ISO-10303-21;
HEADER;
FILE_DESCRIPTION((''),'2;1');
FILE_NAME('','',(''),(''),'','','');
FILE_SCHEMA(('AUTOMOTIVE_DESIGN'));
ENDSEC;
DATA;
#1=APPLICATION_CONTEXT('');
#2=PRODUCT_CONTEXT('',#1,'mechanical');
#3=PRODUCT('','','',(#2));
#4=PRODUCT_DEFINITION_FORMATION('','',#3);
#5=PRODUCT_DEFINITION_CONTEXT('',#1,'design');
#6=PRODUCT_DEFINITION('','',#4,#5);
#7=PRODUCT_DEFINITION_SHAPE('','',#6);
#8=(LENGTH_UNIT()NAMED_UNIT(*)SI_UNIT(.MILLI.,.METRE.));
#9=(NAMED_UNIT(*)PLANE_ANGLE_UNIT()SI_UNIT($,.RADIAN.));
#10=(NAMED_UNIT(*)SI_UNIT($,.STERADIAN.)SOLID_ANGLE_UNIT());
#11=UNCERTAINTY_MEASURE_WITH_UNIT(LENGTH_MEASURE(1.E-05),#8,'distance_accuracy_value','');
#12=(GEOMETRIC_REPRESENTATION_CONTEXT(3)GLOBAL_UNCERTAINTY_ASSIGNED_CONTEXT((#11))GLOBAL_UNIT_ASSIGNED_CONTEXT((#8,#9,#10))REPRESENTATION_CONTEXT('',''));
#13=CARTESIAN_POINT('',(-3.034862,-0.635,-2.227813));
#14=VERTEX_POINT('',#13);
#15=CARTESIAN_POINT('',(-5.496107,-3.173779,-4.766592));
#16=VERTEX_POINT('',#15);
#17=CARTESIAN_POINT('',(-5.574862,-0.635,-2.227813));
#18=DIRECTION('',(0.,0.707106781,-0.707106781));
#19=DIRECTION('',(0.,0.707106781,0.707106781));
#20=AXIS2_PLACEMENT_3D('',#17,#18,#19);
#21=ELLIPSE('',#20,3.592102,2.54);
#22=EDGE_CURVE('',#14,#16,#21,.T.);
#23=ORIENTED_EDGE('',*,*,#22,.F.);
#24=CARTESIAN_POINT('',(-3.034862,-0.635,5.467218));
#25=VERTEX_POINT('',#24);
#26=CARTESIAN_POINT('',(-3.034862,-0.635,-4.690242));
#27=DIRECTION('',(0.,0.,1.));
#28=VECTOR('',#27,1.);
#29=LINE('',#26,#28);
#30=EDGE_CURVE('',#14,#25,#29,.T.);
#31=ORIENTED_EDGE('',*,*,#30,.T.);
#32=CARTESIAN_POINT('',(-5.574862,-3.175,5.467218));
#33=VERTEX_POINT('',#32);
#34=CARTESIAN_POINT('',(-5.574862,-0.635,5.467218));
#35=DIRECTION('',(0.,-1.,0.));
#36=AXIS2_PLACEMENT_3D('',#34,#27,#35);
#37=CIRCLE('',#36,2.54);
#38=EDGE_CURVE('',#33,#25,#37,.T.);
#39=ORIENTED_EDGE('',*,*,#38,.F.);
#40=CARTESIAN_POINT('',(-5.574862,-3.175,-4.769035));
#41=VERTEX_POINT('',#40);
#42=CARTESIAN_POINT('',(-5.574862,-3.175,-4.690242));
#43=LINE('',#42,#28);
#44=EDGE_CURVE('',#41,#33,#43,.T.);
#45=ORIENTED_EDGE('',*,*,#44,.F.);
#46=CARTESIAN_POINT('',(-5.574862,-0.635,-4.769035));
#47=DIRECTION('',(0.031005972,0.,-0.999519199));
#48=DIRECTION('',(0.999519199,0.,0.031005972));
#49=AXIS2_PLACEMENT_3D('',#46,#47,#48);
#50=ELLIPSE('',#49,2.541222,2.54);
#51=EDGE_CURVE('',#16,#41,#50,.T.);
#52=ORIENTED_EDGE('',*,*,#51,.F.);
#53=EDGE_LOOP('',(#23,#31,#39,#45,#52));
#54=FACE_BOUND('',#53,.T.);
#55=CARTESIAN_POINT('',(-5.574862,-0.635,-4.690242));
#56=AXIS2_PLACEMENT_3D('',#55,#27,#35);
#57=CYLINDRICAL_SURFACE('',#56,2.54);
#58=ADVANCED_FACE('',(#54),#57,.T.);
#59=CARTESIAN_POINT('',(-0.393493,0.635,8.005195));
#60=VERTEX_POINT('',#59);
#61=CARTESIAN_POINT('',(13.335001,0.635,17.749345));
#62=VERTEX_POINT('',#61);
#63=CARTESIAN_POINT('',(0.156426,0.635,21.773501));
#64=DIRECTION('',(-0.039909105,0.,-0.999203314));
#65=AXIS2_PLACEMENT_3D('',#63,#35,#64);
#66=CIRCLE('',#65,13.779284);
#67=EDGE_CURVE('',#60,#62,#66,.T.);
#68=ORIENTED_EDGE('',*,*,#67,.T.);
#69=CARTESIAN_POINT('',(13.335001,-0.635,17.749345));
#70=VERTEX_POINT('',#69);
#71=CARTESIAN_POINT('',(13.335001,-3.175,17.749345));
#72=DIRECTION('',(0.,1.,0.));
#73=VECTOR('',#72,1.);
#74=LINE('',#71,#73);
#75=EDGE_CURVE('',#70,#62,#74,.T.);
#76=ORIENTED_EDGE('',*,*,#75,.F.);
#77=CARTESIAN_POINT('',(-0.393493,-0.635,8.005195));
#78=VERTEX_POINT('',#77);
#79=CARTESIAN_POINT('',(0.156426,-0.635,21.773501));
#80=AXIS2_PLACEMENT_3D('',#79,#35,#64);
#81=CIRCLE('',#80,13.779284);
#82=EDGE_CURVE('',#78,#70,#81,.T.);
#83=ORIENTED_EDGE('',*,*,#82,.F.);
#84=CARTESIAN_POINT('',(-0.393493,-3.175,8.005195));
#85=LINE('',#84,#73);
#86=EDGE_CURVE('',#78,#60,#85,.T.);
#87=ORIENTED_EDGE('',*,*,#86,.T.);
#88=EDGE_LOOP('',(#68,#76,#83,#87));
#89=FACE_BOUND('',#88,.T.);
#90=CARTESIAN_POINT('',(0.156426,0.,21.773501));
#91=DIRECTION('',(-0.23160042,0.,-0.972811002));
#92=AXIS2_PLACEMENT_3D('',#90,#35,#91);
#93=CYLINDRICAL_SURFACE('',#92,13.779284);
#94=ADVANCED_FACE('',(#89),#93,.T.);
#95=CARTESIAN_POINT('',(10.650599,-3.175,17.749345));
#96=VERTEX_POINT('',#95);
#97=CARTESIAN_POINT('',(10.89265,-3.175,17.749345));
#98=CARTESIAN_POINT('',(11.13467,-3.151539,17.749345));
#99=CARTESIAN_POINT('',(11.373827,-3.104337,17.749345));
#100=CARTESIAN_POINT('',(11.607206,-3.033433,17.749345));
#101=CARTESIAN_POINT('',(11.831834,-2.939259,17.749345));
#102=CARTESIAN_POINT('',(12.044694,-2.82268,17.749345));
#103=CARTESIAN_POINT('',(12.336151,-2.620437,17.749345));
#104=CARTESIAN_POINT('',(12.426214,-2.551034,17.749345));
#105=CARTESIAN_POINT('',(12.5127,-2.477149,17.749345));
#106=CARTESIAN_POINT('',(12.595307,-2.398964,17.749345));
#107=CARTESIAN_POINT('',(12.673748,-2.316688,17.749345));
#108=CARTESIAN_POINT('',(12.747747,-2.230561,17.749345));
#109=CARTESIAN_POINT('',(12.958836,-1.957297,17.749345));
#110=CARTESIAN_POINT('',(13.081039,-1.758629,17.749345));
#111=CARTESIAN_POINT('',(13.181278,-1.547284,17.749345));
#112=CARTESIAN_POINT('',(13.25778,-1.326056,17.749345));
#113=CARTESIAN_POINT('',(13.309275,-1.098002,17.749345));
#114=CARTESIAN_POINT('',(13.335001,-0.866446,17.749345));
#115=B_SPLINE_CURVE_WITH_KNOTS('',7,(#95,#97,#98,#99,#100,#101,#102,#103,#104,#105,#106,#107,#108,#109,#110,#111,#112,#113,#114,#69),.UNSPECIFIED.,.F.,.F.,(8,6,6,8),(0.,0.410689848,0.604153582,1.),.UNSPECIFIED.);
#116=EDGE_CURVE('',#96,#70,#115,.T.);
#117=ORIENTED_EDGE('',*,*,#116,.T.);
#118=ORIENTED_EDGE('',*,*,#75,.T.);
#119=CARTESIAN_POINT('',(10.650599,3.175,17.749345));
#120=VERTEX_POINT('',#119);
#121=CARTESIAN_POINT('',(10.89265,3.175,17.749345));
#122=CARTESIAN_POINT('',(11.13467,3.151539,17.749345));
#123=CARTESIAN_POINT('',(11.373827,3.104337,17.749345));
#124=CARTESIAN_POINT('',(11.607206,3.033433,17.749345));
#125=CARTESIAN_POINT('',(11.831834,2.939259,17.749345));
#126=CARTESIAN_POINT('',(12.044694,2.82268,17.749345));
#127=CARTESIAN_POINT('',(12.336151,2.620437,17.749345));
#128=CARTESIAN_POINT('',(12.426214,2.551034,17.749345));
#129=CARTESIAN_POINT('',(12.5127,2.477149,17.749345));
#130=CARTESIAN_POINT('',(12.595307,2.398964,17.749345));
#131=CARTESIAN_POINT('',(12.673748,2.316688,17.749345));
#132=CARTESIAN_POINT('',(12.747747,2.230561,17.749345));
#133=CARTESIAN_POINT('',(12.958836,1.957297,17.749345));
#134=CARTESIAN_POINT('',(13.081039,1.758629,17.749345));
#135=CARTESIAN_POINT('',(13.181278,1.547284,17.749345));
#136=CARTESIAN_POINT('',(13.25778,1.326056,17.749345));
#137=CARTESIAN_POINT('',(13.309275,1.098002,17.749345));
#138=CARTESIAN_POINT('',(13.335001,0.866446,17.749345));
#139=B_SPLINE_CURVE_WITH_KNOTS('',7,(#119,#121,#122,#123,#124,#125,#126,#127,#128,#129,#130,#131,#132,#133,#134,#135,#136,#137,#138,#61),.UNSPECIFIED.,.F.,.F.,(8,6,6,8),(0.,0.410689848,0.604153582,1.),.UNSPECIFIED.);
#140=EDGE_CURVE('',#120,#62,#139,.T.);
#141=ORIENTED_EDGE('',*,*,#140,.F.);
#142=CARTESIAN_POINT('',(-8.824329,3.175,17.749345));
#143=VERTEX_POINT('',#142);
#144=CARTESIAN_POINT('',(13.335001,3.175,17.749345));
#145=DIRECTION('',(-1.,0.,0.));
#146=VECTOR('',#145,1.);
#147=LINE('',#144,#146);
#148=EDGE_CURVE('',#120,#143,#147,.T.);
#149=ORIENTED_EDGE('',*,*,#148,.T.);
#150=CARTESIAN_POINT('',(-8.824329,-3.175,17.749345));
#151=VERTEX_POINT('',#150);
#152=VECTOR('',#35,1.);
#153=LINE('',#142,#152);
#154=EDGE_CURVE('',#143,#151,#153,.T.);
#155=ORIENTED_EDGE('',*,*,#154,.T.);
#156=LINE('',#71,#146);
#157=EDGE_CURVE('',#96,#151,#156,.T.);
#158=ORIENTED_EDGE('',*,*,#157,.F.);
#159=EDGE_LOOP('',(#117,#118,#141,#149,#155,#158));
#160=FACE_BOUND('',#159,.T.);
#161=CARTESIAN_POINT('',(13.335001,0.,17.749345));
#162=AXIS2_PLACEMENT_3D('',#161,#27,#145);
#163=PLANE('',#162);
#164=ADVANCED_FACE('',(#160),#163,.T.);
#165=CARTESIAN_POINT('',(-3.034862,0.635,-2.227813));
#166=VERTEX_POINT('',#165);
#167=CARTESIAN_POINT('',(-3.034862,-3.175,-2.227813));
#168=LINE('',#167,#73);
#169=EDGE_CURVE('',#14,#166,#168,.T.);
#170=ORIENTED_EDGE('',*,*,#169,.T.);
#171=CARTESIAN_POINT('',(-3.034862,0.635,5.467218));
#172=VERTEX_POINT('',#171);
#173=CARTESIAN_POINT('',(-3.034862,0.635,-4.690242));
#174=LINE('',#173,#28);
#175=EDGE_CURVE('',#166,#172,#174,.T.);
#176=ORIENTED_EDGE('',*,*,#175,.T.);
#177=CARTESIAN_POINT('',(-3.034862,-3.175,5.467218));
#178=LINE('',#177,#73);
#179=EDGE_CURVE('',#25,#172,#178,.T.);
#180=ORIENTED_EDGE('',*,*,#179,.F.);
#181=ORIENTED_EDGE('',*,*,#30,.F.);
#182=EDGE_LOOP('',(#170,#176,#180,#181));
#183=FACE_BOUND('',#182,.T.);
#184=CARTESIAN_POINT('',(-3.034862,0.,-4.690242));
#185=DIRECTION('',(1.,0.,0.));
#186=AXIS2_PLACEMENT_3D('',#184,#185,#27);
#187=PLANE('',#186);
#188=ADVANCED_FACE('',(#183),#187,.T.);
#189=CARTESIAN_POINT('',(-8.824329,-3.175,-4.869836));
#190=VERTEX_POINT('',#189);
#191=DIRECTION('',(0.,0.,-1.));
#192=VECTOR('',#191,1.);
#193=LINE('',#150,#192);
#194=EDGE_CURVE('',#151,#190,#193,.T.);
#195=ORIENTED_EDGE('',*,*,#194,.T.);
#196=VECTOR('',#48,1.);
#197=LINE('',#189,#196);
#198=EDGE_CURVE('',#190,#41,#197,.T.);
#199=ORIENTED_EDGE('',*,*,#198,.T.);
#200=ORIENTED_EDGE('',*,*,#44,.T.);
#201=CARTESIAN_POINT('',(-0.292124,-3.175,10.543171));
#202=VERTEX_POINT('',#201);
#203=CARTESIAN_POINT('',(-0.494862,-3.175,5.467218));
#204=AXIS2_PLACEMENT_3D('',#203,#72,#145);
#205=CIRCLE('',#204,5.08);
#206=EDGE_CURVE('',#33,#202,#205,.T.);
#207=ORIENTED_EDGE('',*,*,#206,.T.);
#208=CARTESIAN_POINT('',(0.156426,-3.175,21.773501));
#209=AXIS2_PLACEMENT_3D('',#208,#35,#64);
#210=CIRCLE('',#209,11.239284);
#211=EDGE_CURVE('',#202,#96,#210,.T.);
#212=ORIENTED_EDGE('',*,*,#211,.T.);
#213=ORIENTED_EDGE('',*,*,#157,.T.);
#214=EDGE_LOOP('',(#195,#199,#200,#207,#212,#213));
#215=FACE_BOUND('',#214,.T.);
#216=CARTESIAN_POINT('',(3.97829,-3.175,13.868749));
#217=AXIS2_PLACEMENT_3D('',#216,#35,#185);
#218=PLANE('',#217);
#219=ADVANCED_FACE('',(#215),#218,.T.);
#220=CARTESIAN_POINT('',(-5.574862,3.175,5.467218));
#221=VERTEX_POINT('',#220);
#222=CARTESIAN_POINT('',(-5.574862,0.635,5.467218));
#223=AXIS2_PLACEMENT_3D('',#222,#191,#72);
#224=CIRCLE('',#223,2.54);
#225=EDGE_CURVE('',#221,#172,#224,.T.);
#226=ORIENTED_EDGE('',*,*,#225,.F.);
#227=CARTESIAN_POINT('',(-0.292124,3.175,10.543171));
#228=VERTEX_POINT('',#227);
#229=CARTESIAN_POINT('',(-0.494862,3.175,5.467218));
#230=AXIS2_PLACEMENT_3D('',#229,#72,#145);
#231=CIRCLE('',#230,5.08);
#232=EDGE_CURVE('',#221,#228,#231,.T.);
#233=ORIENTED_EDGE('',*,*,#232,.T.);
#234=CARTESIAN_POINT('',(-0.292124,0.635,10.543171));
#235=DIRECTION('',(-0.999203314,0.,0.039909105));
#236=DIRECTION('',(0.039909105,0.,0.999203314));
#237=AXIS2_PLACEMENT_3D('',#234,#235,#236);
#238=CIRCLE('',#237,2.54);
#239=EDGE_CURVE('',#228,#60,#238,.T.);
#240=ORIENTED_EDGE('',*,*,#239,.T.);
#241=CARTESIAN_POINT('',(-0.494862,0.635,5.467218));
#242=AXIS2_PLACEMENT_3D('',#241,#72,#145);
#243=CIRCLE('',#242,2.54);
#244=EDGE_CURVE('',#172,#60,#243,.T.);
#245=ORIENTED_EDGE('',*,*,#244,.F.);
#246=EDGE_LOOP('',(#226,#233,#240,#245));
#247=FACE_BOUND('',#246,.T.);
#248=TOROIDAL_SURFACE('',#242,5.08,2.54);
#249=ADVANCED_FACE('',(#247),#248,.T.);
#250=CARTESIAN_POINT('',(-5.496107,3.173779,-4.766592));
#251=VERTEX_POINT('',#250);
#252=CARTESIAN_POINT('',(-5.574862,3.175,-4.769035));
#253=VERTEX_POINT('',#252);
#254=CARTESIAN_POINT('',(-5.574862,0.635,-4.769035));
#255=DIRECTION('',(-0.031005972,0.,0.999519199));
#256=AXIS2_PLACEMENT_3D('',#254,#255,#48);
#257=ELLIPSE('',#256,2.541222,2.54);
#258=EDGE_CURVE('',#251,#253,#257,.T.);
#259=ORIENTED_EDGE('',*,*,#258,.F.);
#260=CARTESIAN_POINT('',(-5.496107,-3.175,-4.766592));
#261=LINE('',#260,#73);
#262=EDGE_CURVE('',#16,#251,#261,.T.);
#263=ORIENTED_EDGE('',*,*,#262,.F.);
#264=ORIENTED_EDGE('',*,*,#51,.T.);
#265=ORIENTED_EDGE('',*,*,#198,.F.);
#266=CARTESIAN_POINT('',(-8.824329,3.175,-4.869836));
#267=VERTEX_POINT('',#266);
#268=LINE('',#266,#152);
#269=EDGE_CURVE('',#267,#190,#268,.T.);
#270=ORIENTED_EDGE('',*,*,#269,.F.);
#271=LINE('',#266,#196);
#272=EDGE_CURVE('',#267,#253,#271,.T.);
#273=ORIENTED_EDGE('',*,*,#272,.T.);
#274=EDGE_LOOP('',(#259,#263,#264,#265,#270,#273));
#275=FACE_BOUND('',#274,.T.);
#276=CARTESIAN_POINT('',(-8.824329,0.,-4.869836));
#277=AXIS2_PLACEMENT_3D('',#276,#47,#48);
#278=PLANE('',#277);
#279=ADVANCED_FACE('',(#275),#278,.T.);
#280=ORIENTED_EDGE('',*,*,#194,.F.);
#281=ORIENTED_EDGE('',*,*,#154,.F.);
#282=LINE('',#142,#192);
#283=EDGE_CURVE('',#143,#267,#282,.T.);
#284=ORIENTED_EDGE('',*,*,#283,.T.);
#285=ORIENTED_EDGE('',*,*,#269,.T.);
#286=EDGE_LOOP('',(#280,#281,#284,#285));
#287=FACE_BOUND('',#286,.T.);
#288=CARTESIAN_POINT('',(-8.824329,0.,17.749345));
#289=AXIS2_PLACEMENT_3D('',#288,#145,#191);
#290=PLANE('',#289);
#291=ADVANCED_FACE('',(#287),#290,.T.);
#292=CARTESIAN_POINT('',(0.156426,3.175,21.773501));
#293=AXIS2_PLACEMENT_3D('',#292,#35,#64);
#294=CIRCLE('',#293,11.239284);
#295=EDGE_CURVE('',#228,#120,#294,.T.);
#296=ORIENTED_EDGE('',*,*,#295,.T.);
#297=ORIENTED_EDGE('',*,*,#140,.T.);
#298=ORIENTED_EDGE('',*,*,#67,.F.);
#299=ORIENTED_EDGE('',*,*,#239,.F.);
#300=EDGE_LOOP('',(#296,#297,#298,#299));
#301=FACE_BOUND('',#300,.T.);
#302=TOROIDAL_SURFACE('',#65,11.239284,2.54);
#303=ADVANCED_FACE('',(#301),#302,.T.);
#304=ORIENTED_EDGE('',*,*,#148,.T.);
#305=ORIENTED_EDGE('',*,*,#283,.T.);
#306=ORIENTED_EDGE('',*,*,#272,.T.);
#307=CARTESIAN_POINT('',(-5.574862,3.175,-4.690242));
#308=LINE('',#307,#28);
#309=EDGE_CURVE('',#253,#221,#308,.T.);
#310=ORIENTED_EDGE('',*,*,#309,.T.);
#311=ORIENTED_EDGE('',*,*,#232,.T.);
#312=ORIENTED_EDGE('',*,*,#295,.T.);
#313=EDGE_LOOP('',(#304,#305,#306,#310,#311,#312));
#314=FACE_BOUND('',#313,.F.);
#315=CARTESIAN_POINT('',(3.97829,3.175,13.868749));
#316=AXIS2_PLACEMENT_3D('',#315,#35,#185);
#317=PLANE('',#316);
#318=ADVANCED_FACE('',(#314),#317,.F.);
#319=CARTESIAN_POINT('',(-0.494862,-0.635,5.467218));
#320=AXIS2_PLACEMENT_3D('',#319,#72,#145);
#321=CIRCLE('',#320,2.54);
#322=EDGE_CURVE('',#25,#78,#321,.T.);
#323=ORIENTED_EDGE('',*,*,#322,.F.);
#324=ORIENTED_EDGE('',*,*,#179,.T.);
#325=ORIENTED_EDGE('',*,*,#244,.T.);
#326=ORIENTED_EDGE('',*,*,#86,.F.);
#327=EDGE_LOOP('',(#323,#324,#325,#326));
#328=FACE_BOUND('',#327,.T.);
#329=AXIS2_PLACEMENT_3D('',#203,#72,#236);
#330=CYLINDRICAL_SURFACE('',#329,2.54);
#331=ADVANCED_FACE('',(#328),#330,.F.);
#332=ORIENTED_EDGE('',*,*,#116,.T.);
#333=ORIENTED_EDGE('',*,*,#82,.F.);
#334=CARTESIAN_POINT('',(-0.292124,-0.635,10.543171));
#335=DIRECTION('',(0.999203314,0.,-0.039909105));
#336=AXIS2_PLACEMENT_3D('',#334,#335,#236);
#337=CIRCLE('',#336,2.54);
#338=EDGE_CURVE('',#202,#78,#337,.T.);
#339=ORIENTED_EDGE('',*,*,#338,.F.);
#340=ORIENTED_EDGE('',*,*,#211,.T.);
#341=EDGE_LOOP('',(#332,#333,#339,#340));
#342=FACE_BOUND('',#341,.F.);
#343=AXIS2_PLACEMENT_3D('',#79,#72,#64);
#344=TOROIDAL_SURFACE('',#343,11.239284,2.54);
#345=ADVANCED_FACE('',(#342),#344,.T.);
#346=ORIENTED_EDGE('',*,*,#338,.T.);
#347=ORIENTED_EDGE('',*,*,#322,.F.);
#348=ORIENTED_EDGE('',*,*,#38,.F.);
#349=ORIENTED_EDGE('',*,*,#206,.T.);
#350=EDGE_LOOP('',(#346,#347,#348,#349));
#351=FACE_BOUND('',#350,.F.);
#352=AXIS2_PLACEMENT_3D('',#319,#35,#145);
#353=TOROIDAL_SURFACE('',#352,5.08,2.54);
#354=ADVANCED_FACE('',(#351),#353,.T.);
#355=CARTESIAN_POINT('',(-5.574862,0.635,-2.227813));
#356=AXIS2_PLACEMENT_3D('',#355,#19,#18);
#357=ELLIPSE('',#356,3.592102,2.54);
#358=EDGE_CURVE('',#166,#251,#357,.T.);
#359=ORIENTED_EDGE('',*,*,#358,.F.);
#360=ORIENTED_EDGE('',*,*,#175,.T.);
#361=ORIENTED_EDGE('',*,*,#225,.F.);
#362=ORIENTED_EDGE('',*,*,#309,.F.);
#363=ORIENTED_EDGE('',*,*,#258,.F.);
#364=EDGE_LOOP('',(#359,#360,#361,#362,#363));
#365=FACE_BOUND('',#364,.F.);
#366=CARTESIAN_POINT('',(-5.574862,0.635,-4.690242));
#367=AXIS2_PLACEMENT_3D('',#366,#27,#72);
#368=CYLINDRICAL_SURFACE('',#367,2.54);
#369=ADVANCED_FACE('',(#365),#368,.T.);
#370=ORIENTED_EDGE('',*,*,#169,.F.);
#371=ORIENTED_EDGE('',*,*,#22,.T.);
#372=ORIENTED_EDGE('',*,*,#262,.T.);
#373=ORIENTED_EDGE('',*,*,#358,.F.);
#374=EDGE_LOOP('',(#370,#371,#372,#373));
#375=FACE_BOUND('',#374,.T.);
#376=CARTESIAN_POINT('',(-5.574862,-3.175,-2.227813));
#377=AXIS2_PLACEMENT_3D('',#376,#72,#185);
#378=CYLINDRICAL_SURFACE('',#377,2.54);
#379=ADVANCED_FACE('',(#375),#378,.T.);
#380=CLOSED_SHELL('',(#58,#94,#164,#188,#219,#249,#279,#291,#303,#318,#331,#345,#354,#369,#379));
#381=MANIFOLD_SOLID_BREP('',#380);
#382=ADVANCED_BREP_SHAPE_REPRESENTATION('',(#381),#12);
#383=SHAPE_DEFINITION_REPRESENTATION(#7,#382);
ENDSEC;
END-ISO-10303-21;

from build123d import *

# Parameters (mm, degrees)
F1_DEPTH = 3.175
F2_F1_R  = 2.54
F2_F2_R  = 2.54


with BuildPart() as f1:
    # F0 (on Front) → F1 (new body, symmetric)
    with BuildSketch(Plane.XZ):
        with BuildLine():
            Line((13.3350007236, 17.7493449301), (-3.0348624568, 17.7493449301))
            Line((-3.0348624568, 17.7493449301), (-3.0348624568, 8.3688618615))
            ThreePointArc((-3.0348624568, 8.3688618615), (7.007326367, 9.8180073261), (13.3350007236, 17.7493449301))
        make_face()
        Polygon((-3.0348624568, 8.3688618615), (-3.0348624568, 17.7493449301), (-8.8243288919, 17.7493449301), (-8.8243288919, -4.8698359169), (-3.0348624568, -4.6902415343), align=None)
    extrude(amount=F1_DEPTH, both=True)

    # F2: fillet of radius 2.54 on 4 edges, made by hand

    # F2_f1
    f2_f1_edges = [f1.edges().sort_by_distance(p)[0] for p in [
        (-3.0348624568, 0, 8.3688618615),
    ]]
    fillet(f2_f1_edges, radius=F2_F1_R)

    # F2_f2
    f2_f2_edges = [f1.edges().sort_by_distance(p)[0] for p in [
        (-3.0348624568, 3.175, 0.3884883664),
        (-3.0348624568, -3.175, 0.3884883664),
        (-3.0348624568, 0, -4.6902415343),
        (-2.2547093843, -3.175, 7.2987582727),
        (-2.2547093843, 3.175, 7.2987582727),
    ]]
    fillet(f2_f2_edges, radius=F2_F2_R)


solid = f1.part
